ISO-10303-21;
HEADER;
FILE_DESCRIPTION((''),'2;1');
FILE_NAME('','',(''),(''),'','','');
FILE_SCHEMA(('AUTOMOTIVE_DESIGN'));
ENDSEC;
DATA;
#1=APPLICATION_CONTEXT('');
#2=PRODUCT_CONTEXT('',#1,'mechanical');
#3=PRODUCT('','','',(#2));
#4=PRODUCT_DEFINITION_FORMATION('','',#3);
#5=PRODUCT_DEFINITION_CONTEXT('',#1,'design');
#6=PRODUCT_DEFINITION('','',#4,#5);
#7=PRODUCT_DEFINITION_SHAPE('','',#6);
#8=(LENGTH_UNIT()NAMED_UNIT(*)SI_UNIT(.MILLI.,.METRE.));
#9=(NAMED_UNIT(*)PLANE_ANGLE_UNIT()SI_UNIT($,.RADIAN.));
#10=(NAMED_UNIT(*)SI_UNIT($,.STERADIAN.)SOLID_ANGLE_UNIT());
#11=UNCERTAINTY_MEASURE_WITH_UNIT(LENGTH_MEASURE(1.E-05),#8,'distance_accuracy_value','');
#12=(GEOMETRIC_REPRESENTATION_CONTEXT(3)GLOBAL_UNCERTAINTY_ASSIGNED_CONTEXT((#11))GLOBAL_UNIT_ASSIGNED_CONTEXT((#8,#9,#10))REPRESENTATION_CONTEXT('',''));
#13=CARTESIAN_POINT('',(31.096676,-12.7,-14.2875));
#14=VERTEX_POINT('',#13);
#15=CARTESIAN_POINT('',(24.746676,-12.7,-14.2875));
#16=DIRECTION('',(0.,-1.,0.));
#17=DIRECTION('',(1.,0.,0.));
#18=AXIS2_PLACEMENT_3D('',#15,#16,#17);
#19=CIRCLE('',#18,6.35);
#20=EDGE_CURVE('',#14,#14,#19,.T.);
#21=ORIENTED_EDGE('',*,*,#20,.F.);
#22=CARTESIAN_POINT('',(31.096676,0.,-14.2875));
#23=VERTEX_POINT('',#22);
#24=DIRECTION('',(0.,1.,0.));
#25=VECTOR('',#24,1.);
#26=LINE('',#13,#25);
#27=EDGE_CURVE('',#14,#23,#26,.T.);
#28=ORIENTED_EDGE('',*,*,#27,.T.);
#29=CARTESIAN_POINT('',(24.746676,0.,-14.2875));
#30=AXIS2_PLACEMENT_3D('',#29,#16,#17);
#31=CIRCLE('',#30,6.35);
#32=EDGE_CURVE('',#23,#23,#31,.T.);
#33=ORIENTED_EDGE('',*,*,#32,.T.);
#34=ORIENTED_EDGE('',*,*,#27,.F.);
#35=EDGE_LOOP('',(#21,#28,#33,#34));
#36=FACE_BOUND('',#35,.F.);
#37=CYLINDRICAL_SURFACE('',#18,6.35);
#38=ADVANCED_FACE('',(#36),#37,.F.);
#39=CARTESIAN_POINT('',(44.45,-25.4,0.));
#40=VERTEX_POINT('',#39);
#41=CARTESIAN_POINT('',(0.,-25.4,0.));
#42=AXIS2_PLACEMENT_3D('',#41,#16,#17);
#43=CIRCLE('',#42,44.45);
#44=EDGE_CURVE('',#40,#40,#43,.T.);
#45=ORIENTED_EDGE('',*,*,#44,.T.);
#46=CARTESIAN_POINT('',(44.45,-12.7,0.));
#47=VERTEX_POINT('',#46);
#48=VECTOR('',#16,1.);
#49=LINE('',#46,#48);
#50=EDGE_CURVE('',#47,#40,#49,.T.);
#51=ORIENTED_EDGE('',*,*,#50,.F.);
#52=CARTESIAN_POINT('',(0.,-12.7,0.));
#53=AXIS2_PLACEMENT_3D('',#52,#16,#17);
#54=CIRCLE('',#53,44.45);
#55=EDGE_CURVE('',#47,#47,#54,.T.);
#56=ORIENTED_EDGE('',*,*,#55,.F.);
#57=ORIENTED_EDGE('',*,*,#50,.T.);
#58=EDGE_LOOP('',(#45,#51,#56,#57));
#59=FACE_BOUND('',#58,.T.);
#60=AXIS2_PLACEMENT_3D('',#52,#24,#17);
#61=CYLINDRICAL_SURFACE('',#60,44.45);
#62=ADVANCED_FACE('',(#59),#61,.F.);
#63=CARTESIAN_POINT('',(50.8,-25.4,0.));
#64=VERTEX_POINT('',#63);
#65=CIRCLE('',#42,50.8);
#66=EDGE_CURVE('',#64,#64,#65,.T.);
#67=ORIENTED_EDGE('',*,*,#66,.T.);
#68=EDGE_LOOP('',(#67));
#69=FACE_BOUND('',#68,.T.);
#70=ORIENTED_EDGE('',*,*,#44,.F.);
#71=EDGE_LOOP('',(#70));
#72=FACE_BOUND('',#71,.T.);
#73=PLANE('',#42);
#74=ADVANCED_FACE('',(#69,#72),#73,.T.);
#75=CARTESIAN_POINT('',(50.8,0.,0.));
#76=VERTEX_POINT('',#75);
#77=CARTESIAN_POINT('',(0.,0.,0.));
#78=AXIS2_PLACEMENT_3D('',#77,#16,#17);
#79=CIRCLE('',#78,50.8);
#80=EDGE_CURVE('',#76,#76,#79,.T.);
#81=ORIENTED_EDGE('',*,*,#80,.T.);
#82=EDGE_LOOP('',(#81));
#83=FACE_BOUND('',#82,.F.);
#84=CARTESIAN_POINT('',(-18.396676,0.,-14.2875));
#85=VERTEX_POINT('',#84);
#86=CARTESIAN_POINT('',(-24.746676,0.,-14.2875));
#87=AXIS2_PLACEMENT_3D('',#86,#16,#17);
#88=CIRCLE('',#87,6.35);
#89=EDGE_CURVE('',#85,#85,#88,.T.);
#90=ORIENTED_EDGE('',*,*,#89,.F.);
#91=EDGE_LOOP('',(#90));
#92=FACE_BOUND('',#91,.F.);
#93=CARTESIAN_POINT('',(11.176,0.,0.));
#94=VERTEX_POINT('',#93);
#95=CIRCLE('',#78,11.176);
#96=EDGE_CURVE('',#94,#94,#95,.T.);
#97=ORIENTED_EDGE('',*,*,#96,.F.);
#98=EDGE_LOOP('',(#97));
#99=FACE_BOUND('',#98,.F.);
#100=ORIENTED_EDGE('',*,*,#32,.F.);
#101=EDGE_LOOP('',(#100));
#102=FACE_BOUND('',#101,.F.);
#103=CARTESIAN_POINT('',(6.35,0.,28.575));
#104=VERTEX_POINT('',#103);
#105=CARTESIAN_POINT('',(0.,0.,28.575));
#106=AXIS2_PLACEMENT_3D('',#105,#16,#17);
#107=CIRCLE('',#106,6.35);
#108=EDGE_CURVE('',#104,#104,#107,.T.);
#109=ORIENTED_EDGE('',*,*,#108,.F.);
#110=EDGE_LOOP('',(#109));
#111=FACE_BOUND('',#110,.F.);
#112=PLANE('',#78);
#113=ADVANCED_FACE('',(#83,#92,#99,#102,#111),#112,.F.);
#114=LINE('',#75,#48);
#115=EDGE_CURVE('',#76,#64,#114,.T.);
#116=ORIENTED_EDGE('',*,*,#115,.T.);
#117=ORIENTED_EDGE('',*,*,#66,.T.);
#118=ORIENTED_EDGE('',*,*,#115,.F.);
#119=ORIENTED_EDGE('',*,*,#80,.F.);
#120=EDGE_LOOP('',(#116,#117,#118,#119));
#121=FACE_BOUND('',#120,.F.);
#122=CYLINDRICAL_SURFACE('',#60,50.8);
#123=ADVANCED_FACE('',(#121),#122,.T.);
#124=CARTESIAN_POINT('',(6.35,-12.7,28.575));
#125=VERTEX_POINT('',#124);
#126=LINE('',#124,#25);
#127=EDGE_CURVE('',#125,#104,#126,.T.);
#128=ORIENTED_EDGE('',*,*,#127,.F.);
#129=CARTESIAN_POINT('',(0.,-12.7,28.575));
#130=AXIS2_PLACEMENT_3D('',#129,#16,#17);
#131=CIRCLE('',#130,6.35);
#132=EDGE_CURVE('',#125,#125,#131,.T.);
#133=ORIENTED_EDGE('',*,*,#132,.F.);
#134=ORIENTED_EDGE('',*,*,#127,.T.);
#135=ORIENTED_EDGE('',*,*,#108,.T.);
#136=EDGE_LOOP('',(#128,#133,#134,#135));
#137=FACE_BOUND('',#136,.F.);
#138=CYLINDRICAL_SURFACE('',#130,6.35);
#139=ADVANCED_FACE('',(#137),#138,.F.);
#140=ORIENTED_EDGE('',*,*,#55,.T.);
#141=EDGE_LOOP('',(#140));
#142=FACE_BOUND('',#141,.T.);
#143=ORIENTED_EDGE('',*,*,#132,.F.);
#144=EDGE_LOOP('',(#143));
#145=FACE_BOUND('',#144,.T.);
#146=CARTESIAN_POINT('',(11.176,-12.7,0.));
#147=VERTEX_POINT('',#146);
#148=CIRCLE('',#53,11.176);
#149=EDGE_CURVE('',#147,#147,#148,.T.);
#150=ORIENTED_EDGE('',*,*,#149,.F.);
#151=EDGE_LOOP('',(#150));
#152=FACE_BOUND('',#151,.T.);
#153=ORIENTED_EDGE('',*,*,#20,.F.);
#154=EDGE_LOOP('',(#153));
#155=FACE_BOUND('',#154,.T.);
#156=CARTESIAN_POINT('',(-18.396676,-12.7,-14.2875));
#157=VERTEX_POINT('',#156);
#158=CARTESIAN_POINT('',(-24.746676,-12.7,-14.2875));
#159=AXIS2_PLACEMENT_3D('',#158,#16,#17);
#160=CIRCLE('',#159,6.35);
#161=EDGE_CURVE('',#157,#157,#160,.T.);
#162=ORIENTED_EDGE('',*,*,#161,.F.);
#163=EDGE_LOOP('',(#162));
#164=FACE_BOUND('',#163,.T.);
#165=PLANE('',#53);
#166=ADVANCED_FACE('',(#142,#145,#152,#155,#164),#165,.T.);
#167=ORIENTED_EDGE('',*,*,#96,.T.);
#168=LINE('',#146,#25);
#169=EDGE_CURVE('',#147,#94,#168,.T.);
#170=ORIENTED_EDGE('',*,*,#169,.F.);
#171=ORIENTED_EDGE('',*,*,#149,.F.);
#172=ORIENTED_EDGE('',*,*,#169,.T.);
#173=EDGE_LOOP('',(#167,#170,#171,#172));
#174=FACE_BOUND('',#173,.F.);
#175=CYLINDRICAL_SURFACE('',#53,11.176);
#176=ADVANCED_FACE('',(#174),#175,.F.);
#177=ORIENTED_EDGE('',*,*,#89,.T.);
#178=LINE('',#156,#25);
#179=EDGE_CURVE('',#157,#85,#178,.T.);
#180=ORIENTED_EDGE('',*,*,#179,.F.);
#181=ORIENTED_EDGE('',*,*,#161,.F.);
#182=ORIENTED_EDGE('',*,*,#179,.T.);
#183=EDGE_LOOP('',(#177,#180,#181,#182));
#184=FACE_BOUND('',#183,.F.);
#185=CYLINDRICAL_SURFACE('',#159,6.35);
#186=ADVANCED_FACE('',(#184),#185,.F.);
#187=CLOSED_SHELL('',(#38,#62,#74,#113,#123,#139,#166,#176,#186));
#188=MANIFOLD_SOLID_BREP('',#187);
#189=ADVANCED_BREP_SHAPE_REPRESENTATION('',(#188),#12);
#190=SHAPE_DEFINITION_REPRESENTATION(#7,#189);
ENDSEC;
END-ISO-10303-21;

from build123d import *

# Parameters (mm, degrees)
F0_R     = 50.8
F0_R_2   = 44.45
F0_R_3   = 11.176
F1_DEPTH = 12.7
F2_R     = 6.35
F2_R_2   = 11.176
F3_DEPTH = 12.701
F2_R_3   = 50.8
F2_R_4   = 44.45
F4_DEPTH = 12.7


# Not quite as in the source:
# - a feature names something its author has since deleted; it is built from what else it names


with BuildPart() as f1:
    # F0 (on Front) → F1 (new body)
    with BuildSketch(Plane.XZ):
        Circle(F0_R)
        Circle(F0_R_2, mode=Mode.SUBTRACT)
        Circle(F0_R_2)
        Circle(F0_R_3, mode=Mode.SUBTRACT)
        Circle(F0_R_3)
    extrude(amount=F1_DEPTH)

    # F2 (on face) → F3 (cut, through all)
    with BuildSketch(Plane.XZ.offset(12.7)):
        with Locations((0, 28.575)):
            Circle(F2_R)
        with Locations((-24.7466759131, -14.2875)):
            Circle(F2_R)
        Circle(F2_R_2)
        with Locations((24.7466759131, -14.2875)):
            Circle(F2_R)
    extrude(amount=-F3_DEPTH, mode=Mode.SUBTRACT)

    # F2 (on face) → F4 (join)
    with BuildSketch(Plane.XZ.offset(12.7)):
        Circle(F2_R_3)
        Circle(F2_R_4, mode=Mode.SUBTRACT)
    extrude(amount=F4_DEPTH)


solid = f1.part
